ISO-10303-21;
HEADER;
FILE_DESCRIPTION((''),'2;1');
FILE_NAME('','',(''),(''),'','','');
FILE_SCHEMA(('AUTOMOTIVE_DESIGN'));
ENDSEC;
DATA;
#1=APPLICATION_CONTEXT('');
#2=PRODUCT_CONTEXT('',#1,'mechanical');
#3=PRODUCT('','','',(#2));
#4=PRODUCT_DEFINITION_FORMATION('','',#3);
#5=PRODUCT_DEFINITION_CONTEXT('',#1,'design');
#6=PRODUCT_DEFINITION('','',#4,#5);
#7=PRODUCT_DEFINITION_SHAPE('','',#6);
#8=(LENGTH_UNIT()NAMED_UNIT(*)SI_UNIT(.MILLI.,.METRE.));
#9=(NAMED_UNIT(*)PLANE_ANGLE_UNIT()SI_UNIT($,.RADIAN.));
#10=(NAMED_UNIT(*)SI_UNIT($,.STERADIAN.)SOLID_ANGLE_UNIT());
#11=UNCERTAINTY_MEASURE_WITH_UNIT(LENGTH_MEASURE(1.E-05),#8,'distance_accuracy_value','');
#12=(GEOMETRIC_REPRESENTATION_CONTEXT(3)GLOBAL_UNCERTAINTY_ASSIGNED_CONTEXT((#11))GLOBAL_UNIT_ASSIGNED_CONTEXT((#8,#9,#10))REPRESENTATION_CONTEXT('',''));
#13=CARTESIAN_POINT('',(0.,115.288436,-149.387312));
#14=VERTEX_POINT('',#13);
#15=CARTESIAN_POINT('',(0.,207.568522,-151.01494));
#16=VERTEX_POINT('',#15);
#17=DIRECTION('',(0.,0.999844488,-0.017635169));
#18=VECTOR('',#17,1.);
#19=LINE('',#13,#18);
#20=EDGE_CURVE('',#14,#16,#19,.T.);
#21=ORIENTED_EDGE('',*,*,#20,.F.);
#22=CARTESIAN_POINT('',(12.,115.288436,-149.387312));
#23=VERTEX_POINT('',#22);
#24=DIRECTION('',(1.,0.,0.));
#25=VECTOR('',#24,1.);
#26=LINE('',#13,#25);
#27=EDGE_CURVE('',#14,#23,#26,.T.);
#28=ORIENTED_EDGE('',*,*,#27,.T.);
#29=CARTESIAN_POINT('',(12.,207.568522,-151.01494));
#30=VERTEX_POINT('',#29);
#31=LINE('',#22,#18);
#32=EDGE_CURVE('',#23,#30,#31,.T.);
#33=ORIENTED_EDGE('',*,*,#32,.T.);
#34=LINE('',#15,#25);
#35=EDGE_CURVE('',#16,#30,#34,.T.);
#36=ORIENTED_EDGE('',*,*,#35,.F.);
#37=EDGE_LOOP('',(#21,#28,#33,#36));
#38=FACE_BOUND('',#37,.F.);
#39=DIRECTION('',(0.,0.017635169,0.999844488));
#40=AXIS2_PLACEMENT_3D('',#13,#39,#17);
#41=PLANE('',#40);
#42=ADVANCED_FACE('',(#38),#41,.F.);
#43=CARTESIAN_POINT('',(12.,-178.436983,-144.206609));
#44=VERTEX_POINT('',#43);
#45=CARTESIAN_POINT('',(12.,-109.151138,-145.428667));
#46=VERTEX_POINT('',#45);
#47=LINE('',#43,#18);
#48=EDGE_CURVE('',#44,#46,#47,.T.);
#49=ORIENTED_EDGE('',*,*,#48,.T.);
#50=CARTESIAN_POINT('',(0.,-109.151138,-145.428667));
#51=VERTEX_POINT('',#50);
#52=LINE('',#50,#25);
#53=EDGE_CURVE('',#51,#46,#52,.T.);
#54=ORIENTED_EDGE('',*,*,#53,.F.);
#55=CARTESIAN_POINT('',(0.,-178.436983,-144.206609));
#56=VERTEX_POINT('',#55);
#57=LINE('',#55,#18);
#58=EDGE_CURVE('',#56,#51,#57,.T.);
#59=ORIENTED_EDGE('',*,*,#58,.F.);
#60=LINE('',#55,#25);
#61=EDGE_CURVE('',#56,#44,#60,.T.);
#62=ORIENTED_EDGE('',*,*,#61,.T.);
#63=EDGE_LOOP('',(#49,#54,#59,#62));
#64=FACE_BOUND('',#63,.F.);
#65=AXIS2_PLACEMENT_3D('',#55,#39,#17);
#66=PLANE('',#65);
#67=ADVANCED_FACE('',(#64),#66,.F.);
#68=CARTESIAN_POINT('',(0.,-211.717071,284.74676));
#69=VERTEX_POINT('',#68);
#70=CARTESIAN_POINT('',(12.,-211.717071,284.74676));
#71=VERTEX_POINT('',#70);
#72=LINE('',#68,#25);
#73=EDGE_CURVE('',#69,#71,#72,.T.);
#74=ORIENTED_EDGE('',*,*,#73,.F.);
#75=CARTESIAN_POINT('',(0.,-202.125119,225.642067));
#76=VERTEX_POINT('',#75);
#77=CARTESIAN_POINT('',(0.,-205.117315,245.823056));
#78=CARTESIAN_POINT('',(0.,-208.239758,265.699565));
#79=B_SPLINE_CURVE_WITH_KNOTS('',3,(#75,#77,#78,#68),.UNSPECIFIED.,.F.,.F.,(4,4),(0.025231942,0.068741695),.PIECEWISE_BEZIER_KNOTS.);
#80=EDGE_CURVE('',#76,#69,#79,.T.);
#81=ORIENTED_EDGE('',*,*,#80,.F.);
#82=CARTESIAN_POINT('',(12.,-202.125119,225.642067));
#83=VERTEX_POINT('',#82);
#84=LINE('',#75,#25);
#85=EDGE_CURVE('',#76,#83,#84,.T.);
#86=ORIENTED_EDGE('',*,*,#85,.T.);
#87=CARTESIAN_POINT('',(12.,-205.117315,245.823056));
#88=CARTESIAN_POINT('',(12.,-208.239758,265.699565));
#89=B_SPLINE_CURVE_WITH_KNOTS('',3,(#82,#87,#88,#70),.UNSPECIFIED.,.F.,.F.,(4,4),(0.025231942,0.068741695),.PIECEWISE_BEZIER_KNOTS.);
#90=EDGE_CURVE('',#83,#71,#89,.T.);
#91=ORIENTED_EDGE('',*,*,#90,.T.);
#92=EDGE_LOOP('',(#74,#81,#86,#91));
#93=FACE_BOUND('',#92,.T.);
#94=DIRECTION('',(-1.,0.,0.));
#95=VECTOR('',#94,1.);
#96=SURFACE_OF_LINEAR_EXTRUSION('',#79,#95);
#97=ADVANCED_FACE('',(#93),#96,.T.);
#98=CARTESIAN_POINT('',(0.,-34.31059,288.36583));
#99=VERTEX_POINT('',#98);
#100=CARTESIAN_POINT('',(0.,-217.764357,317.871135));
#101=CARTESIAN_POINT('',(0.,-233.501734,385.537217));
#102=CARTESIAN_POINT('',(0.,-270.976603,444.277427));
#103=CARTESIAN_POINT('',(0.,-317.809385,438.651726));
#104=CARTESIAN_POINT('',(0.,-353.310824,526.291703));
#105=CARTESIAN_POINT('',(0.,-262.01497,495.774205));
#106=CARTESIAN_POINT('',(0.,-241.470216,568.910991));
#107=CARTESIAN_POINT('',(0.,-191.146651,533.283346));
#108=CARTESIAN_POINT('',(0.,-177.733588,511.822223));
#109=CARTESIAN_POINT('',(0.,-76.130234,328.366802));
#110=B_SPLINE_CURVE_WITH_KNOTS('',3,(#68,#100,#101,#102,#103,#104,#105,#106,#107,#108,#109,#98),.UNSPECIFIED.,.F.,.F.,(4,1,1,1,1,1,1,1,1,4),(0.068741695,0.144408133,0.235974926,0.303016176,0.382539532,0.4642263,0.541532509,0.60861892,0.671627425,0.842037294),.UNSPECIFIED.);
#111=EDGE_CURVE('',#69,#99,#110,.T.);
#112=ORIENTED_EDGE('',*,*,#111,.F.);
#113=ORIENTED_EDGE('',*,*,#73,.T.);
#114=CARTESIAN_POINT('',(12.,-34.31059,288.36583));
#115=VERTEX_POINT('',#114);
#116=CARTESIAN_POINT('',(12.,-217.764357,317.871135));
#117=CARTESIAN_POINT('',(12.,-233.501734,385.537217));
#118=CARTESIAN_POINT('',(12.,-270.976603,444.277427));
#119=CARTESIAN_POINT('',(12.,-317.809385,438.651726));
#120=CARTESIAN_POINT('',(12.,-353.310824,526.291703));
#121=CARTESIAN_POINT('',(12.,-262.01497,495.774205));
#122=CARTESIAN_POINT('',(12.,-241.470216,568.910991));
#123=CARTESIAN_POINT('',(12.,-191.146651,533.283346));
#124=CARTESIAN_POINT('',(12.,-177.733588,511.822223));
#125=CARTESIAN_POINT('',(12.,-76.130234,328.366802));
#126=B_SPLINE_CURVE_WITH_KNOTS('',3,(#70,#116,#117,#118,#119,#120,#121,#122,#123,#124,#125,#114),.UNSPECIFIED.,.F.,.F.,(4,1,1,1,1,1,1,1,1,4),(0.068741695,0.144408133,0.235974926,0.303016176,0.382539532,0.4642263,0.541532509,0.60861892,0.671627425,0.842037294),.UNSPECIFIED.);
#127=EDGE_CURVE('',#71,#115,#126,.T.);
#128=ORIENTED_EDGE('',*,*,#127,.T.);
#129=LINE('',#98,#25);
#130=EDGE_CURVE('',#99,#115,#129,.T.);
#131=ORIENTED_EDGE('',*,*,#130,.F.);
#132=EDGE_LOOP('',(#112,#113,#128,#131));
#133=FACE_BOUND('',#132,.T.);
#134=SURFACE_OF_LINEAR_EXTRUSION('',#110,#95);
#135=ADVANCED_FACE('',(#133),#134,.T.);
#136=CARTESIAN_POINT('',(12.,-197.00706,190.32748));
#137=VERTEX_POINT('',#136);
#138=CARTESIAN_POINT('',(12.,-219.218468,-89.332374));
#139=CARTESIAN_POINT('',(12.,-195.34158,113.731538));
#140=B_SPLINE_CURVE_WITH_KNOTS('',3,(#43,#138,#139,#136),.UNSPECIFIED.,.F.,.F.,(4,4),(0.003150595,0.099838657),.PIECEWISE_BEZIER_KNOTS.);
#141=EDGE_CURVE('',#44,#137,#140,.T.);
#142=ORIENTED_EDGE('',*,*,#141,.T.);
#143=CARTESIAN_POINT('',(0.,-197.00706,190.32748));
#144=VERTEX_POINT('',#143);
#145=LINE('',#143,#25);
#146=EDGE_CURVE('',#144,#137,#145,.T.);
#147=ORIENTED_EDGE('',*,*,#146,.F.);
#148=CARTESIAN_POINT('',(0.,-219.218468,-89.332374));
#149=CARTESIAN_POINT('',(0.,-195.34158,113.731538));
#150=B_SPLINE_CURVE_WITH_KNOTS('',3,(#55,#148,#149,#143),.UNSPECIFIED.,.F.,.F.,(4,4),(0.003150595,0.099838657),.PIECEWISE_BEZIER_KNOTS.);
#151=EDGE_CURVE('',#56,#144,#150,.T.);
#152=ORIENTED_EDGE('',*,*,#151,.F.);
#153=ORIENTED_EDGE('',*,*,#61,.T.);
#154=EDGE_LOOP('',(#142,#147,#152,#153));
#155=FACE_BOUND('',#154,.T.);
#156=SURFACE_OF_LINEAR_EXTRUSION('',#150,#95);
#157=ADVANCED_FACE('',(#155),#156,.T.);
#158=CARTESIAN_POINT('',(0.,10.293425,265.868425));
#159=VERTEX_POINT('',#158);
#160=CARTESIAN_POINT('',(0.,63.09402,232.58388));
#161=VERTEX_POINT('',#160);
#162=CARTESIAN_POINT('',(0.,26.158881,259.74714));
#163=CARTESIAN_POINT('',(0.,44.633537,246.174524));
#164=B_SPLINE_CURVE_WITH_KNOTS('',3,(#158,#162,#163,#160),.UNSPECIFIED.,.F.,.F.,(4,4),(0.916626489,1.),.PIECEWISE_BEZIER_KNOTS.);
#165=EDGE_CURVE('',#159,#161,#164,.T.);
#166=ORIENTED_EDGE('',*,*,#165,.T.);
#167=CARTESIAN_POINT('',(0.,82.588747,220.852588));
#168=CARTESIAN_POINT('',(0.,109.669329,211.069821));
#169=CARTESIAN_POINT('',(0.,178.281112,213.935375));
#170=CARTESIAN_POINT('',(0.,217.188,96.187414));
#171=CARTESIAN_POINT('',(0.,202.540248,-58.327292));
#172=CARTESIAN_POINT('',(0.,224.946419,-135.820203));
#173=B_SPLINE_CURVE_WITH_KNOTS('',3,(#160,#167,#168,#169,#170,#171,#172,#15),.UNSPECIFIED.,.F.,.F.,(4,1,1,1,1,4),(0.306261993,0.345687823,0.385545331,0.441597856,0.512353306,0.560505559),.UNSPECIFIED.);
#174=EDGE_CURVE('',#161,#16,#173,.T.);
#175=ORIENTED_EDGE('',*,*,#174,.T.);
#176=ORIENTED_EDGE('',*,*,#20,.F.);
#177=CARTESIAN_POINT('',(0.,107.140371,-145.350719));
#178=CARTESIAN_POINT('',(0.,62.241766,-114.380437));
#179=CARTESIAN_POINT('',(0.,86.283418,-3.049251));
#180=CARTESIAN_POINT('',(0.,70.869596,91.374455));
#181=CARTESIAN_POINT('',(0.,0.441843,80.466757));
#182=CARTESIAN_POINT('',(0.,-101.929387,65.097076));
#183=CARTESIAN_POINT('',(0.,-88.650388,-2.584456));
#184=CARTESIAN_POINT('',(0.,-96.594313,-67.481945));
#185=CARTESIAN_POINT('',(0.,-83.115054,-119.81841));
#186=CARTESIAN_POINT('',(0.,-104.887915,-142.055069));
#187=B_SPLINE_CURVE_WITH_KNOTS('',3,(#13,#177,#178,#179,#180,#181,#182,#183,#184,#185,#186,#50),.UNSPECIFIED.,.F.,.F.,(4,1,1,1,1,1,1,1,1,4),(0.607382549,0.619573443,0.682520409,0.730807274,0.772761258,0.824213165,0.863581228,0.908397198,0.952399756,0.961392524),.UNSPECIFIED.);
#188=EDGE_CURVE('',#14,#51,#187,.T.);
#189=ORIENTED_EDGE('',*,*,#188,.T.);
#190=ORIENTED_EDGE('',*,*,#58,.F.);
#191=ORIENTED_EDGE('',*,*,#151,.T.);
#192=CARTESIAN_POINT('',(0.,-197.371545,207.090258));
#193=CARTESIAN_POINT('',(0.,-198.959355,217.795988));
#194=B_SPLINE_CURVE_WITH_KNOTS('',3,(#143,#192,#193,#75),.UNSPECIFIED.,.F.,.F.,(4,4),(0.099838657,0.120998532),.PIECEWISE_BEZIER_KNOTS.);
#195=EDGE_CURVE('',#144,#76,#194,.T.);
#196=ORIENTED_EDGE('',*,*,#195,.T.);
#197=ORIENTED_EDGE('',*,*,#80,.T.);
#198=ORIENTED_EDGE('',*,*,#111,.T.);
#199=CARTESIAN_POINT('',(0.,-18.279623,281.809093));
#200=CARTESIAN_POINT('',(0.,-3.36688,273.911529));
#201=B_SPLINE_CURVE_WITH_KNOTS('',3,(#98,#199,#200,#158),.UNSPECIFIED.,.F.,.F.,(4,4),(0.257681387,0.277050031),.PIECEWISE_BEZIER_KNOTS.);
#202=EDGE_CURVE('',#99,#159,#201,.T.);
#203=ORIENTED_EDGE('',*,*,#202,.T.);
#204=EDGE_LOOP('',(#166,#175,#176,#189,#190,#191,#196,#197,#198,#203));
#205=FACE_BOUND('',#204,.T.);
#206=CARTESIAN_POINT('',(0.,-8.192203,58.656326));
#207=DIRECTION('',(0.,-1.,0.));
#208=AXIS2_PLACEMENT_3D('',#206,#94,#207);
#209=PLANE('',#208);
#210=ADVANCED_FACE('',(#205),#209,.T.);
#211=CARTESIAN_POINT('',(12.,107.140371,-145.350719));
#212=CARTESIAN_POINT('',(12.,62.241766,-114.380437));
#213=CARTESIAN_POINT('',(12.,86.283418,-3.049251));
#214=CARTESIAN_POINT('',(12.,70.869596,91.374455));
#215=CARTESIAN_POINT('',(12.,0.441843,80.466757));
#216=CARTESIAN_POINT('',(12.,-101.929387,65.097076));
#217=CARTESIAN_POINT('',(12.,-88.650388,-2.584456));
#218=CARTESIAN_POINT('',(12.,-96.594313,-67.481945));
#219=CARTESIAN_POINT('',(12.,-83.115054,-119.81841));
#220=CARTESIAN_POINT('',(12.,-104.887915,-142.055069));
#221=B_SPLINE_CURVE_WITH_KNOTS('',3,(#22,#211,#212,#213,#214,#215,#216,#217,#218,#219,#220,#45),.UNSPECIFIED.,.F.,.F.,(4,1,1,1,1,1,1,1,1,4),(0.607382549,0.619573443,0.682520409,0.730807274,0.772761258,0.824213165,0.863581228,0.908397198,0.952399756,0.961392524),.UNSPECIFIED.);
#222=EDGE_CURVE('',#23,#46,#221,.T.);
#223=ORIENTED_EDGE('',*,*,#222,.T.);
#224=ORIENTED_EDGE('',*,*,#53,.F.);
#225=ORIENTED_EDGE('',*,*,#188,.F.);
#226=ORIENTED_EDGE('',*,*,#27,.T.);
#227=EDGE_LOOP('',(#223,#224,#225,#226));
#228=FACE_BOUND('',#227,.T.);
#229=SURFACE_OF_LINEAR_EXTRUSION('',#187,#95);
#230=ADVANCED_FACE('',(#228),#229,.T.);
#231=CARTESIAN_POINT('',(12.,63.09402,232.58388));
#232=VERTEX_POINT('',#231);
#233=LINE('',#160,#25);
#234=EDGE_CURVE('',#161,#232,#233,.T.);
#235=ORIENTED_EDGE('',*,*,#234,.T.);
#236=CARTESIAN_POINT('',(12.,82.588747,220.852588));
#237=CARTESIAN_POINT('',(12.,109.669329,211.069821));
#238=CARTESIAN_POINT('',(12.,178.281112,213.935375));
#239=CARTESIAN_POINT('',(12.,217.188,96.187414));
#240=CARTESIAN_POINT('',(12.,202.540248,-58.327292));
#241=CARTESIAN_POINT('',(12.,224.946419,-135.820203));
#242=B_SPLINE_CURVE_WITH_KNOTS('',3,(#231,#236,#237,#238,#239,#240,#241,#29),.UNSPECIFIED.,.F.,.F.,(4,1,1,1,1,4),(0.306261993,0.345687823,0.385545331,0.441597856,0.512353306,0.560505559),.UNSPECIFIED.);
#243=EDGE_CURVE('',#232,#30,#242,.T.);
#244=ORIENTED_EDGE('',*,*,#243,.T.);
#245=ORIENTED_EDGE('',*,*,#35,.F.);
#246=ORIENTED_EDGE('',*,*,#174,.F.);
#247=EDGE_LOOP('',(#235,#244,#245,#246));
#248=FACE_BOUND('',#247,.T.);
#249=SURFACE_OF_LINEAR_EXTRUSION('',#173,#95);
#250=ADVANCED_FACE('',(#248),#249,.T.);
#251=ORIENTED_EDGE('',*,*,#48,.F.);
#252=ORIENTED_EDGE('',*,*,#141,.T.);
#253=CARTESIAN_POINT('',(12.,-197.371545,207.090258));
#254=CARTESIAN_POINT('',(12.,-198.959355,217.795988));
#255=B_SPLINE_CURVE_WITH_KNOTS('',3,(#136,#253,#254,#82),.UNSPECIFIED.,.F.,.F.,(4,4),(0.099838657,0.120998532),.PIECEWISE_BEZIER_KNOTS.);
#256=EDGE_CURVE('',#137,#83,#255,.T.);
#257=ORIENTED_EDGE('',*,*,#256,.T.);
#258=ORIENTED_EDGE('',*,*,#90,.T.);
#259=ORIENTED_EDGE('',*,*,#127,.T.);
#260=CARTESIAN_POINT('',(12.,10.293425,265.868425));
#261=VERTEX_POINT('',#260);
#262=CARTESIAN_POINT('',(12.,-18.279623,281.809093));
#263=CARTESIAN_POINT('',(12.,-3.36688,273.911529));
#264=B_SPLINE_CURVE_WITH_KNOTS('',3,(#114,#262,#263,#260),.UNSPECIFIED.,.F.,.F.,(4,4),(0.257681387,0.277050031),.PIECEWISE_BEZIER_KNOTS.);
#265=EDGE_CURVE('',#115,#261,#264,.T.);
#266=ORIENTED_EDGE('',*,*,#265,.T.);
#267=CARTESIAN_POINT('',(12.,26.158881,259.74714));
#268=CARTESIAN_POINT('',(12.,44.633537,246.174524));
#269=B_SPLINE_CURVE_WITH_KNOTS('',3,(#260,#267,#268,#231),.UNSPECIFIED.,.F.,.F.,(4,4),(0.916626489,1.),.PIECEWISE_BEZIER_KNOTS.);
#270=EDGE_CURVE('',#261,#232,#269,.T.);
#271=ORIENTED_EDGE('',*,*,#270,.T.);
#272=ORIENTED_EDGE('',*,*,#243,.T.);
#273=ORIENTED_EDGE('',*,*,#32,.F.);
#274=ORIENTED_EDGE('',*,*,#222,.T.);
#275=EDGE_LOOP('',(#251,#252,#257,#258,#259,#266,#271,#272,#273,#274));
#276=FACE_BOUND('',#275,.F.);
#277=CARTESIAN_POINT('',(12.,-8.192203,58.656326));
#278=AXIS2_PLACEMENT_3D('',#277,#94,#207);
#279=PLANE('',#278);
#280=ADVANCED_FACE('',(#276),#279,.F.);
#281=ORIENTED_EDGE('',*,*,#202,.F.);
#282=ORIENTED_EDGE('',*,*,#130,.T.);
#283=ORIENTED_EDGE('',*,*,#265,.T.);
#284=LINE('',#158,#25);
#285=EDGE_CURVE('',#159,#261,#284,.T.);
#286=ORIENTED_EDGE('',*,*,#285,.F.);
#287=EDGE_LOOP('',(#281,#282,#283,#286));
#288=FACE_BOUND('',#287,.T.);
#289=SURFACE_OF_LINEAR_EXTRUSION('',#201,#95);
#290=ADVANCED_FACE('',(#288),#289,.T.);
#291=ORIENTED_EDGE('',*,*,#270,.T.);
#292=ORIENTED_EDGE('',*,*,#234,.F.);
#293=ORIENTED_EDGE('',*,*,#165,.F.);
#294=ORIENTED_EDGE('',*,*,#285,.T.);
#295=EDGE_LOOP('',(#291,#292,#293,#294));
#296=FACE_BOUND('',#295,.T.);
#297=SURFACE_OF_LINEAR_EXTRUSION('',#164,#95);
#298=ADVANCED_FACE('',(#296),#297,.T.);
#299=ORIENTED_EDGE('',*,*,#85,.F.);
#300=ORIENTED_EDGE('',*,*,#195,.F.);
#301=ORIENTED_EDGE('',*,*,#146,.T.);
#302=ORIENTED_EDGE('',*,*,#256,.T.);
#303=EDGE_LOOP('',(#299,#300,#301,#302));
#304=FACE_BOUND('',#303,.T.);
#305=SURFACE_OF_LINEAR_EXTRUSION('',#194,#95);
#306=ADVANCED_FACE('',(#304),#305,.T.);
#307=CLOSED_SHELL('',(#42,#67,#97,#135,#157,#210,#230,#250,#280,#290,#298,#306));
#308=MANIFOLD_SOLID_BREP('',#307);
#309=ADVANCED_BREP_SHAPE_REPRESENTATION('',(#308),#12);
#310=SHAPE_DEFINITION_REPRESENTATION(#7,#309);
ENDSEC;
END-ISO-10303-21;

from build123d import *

# Parameters (mm, degrees)
F1_DEPTH = 12


with BuildPart() as f1:
    # F0 (on Right) → F1 (new body)
    with BuildSketch(Plane.YZ):
        with BuildLine():
            add(Edge.make_bspline(
                [(-178.4369833225, -144.2066091912), (-219.218467925, -89.3323742164), (-195.3415795005, 113.7315380775), (-197.007060051, 190.3274804354)],
                knots=[0.0031505946, 0.0031505946, 0.0031505946, 0.0031505946, 0.0998386573, 0.0998386573, 0.0998386573, 0.0998386573], degree=3))
            Line((-178.4369833225, -144.2066091912), (-109.1511381578, -145.4286668255))
            add(Edge.make_bspline(
                [(115.2884357666, -149.3873122617), (107.1403709504, -145.3507189429), (62.2417659614, -114.3804366066), (86.2834183467, -3.0492512147), (70.8695963558, 91.374454728), (0.4418432139, 80.4667572796), (-101.9293868506, 65.0970756202), (-88.6503884924, -2.5844560488), (-96.59431316, -67.481945255), (-83.1150537691, -119.8184104695), (-104.8879154969, -142.055068639), (-109.1511381578, -145.4286668255)],
                knots=[0.6073825493, 0.6073825493, 0.6073825493, 0.6073825493, 0.6195734428, 0.6825204089, 0.7308072739, 0.7727612584, 0.824213165, 0.8635812279, 0.9083971983, 0.9523997564, 0.9613925241, 0.9613925241, 0.9613925241, 0.9613925241], degree=3))
            Line((115.2884357666, -149.3873122617), (207.5685221579, -151.0149402974))
            add(Edge.make_bspline(
                [(63.0940198898, 232.5838804245), (82.5887469223, 220.8525880353), (109.669328549, 211.0698213252), (178.2811116459, 213.9353754027), (217.1880000792, 96.1874140131), (202.5402479992, -58.3272921235), (224.9464188994, -135.8202031967), (207.5685221579, -151.0149402974)],
                knots=[0.3062619929, 0.3062619929, 0.3062619929, 0.3062619929, 0.3456878235, 0.3855453305, 0.441597856, 0.5123533056, 0.5605055591, 0.5605055591, 0.5605055591, 0.5605055591], degree=3))
            add(Edge.make_bspline(
                [(10.2934252514, 265.8684253693), (30.8960203842, 253.7377434197), (48.6497019648, 241.2760009482), (63.0940198898, 232.5838804245)],
                knots=[0.2770500306, 0.2770500306, 0.2770500306, 0.2770500306, 0.3062619929, 0.3062619929, 0.3062619929, 0.3062619929], degree=3))
            add(Edge.make_bspline(
                [(-34.3105899744, 288.3658303985), (-16.0059367898, 270.857218406), (-3.9004302042, 271.3447660229), (10.2934252515, 265.8684253693)],
                knots=[0.8420372945, 0.8420372945, 0.8420372945, 0.8420372945, 0.9166264892, 0.9166264892, 0.9166264892, 0.9166264892], degree=3))
            add(Edge.make_bspline(
                [(-211.7170714071, 284.7467597814), (-184.5213159088, 297.7083735615), (-113.0964050862, 313.28698488), (-53.1463731801, 296.0697503513), (-34.3105899743, 288.3658303985)],
                knots=[0.1907363518, 0.1907363518, 0.1907363518, 0.1907363518, 0.2349239596, 0.2576813871, 0.2576813871, 0.2576813871, 0.2576813871], degree=3))
            add(Edge.make_bspline(
                [(-202.1251185427, 225.6420666888), (-205.1173154703, 245.8230559311), (-208.2397581251, 265.699564879), (-211.7170714094, 284.7467597816)],
                knots=[0.0252319415, 0.0252319415, 0.0252319415, 0.0252319415, 0.0687416948, 0.0687416948, 0.0687416948, 0.0687416948], degree=3))
            add(Edge.make_bspline(
                [(-197.007060051, 190.3274804354), (-197.3715451624, 207.0902583485), (-198.959354649, 217.7959884423), (-202.1251185427, 225.6420666888)],
                knots=[0.0998386573, 0.0998386573, 0.0998386573, 0.0998386573, 0.1209985317, 0.1209985317, 0.1209985317, 0.1209985317], degree=3))
        make_face()
        with BuildLine():
            add(Edge.make_bspline(
                [(-211.7170714094, 284.7467597816), (-217.7643571513, 317.8711350511), (-233.501733701, 385.5372165029), (-270.9766028708, 444.2774273237), (-317.8093852203, 438.6517263777), (-353.310824472, 526.2917032161), (-262.014970167, 495.7742045555), (-241.4702158375, 568.9109908599), (-191.1466514789, 533.2833458738), (-177.7335883136, 511.8222232655), (-76.1302337971, 328.3668022809), (-34.3105899744, 288.3658303985)],
                knots=[0.0687416948, 0.0687416948, 0.0687416948, 0.0687416948, 0.144408133, 0.2359749256, 0.3030161757, 0.3825395321, 0.4642263003, 0.5415325093, 0.6086189201, 0.6716274253, 0.8420372945, 0.8420372945, 0.8420372945, 0.8420372945], degree=3))
            add(Edge.make_bspline(
                [(-211.7170714071, 284.7467597814), (-184.5213159088, 297.7083735615), (-113.0964050862, 313.28698488), (-53.1463731801, 296.0697503513), (-34.3105899743, 288.3658303985)],
                knots=[0.1907363518, 0.1907363518, 0.1907363518, 0.1907363518, 0.2349239596, 0.2576813871, 0.2576813871, 0.2576813871, 0.2576813871], degree=3))
        make_face()
        with BuildLine():
            add(Edge.make_bspline(
                [(10.2934252514, 265.8684253693), (30.8960203842, 253.7377434197), (48.6497019648, 241.2760009482), (63.0940198898, 232.5838804245)],
                knots=[0.2770500306, 0.2770500306, 0.2770500306, 0.2770500306, 0.3062619929, 0.3062619929, 0.3062619929, 0.3062619929], degree=3))
            add(Edge.make_bspline(
                [(10.2934252515, 265.8684253693), (26.1588809193, 259.747139991), (44.6335367378, 246.1745238524), (63.0940198898, 232.5838804245)],
                knots=[0.9166264892, 0.9166264892, 0.9166264892, 0.9166264892, 1, 1, 1, 1], degree=3))
        make_face()
        with BuildLine():
            add(Edge.make_bspline(
                [(-34.3105899743, 288.3658303985), (-18.2796229907, 281.8090928814), (-3.3668798977, 273.9115294555), (10.2934252514, 265.8684253693)],
                knots=[0.2576813871, 0.2576813871, 0.2576813871, 0.2576813871, 0.2770500306, 0.2770500306, 0.2770500306, 0.2770500306], degree=3))
            add(Edge.make_bspline(
                [(-34.3105899744, 288.3658303985), (-16.0059367898, 270.857218406), (-3.9004302042, 271.3447660229), (10.2934252515, 265.8684253693)],
                knots=[0.8420372945, 0.8420372945, 0.8420372945, 0.8420372945, 0.9166264892, 0.9166264892, 0.9166264892, 0.9166264892], degree=3))
        make_face()
    extrude(amount=F1_DEPTH)


solid = f1.part
